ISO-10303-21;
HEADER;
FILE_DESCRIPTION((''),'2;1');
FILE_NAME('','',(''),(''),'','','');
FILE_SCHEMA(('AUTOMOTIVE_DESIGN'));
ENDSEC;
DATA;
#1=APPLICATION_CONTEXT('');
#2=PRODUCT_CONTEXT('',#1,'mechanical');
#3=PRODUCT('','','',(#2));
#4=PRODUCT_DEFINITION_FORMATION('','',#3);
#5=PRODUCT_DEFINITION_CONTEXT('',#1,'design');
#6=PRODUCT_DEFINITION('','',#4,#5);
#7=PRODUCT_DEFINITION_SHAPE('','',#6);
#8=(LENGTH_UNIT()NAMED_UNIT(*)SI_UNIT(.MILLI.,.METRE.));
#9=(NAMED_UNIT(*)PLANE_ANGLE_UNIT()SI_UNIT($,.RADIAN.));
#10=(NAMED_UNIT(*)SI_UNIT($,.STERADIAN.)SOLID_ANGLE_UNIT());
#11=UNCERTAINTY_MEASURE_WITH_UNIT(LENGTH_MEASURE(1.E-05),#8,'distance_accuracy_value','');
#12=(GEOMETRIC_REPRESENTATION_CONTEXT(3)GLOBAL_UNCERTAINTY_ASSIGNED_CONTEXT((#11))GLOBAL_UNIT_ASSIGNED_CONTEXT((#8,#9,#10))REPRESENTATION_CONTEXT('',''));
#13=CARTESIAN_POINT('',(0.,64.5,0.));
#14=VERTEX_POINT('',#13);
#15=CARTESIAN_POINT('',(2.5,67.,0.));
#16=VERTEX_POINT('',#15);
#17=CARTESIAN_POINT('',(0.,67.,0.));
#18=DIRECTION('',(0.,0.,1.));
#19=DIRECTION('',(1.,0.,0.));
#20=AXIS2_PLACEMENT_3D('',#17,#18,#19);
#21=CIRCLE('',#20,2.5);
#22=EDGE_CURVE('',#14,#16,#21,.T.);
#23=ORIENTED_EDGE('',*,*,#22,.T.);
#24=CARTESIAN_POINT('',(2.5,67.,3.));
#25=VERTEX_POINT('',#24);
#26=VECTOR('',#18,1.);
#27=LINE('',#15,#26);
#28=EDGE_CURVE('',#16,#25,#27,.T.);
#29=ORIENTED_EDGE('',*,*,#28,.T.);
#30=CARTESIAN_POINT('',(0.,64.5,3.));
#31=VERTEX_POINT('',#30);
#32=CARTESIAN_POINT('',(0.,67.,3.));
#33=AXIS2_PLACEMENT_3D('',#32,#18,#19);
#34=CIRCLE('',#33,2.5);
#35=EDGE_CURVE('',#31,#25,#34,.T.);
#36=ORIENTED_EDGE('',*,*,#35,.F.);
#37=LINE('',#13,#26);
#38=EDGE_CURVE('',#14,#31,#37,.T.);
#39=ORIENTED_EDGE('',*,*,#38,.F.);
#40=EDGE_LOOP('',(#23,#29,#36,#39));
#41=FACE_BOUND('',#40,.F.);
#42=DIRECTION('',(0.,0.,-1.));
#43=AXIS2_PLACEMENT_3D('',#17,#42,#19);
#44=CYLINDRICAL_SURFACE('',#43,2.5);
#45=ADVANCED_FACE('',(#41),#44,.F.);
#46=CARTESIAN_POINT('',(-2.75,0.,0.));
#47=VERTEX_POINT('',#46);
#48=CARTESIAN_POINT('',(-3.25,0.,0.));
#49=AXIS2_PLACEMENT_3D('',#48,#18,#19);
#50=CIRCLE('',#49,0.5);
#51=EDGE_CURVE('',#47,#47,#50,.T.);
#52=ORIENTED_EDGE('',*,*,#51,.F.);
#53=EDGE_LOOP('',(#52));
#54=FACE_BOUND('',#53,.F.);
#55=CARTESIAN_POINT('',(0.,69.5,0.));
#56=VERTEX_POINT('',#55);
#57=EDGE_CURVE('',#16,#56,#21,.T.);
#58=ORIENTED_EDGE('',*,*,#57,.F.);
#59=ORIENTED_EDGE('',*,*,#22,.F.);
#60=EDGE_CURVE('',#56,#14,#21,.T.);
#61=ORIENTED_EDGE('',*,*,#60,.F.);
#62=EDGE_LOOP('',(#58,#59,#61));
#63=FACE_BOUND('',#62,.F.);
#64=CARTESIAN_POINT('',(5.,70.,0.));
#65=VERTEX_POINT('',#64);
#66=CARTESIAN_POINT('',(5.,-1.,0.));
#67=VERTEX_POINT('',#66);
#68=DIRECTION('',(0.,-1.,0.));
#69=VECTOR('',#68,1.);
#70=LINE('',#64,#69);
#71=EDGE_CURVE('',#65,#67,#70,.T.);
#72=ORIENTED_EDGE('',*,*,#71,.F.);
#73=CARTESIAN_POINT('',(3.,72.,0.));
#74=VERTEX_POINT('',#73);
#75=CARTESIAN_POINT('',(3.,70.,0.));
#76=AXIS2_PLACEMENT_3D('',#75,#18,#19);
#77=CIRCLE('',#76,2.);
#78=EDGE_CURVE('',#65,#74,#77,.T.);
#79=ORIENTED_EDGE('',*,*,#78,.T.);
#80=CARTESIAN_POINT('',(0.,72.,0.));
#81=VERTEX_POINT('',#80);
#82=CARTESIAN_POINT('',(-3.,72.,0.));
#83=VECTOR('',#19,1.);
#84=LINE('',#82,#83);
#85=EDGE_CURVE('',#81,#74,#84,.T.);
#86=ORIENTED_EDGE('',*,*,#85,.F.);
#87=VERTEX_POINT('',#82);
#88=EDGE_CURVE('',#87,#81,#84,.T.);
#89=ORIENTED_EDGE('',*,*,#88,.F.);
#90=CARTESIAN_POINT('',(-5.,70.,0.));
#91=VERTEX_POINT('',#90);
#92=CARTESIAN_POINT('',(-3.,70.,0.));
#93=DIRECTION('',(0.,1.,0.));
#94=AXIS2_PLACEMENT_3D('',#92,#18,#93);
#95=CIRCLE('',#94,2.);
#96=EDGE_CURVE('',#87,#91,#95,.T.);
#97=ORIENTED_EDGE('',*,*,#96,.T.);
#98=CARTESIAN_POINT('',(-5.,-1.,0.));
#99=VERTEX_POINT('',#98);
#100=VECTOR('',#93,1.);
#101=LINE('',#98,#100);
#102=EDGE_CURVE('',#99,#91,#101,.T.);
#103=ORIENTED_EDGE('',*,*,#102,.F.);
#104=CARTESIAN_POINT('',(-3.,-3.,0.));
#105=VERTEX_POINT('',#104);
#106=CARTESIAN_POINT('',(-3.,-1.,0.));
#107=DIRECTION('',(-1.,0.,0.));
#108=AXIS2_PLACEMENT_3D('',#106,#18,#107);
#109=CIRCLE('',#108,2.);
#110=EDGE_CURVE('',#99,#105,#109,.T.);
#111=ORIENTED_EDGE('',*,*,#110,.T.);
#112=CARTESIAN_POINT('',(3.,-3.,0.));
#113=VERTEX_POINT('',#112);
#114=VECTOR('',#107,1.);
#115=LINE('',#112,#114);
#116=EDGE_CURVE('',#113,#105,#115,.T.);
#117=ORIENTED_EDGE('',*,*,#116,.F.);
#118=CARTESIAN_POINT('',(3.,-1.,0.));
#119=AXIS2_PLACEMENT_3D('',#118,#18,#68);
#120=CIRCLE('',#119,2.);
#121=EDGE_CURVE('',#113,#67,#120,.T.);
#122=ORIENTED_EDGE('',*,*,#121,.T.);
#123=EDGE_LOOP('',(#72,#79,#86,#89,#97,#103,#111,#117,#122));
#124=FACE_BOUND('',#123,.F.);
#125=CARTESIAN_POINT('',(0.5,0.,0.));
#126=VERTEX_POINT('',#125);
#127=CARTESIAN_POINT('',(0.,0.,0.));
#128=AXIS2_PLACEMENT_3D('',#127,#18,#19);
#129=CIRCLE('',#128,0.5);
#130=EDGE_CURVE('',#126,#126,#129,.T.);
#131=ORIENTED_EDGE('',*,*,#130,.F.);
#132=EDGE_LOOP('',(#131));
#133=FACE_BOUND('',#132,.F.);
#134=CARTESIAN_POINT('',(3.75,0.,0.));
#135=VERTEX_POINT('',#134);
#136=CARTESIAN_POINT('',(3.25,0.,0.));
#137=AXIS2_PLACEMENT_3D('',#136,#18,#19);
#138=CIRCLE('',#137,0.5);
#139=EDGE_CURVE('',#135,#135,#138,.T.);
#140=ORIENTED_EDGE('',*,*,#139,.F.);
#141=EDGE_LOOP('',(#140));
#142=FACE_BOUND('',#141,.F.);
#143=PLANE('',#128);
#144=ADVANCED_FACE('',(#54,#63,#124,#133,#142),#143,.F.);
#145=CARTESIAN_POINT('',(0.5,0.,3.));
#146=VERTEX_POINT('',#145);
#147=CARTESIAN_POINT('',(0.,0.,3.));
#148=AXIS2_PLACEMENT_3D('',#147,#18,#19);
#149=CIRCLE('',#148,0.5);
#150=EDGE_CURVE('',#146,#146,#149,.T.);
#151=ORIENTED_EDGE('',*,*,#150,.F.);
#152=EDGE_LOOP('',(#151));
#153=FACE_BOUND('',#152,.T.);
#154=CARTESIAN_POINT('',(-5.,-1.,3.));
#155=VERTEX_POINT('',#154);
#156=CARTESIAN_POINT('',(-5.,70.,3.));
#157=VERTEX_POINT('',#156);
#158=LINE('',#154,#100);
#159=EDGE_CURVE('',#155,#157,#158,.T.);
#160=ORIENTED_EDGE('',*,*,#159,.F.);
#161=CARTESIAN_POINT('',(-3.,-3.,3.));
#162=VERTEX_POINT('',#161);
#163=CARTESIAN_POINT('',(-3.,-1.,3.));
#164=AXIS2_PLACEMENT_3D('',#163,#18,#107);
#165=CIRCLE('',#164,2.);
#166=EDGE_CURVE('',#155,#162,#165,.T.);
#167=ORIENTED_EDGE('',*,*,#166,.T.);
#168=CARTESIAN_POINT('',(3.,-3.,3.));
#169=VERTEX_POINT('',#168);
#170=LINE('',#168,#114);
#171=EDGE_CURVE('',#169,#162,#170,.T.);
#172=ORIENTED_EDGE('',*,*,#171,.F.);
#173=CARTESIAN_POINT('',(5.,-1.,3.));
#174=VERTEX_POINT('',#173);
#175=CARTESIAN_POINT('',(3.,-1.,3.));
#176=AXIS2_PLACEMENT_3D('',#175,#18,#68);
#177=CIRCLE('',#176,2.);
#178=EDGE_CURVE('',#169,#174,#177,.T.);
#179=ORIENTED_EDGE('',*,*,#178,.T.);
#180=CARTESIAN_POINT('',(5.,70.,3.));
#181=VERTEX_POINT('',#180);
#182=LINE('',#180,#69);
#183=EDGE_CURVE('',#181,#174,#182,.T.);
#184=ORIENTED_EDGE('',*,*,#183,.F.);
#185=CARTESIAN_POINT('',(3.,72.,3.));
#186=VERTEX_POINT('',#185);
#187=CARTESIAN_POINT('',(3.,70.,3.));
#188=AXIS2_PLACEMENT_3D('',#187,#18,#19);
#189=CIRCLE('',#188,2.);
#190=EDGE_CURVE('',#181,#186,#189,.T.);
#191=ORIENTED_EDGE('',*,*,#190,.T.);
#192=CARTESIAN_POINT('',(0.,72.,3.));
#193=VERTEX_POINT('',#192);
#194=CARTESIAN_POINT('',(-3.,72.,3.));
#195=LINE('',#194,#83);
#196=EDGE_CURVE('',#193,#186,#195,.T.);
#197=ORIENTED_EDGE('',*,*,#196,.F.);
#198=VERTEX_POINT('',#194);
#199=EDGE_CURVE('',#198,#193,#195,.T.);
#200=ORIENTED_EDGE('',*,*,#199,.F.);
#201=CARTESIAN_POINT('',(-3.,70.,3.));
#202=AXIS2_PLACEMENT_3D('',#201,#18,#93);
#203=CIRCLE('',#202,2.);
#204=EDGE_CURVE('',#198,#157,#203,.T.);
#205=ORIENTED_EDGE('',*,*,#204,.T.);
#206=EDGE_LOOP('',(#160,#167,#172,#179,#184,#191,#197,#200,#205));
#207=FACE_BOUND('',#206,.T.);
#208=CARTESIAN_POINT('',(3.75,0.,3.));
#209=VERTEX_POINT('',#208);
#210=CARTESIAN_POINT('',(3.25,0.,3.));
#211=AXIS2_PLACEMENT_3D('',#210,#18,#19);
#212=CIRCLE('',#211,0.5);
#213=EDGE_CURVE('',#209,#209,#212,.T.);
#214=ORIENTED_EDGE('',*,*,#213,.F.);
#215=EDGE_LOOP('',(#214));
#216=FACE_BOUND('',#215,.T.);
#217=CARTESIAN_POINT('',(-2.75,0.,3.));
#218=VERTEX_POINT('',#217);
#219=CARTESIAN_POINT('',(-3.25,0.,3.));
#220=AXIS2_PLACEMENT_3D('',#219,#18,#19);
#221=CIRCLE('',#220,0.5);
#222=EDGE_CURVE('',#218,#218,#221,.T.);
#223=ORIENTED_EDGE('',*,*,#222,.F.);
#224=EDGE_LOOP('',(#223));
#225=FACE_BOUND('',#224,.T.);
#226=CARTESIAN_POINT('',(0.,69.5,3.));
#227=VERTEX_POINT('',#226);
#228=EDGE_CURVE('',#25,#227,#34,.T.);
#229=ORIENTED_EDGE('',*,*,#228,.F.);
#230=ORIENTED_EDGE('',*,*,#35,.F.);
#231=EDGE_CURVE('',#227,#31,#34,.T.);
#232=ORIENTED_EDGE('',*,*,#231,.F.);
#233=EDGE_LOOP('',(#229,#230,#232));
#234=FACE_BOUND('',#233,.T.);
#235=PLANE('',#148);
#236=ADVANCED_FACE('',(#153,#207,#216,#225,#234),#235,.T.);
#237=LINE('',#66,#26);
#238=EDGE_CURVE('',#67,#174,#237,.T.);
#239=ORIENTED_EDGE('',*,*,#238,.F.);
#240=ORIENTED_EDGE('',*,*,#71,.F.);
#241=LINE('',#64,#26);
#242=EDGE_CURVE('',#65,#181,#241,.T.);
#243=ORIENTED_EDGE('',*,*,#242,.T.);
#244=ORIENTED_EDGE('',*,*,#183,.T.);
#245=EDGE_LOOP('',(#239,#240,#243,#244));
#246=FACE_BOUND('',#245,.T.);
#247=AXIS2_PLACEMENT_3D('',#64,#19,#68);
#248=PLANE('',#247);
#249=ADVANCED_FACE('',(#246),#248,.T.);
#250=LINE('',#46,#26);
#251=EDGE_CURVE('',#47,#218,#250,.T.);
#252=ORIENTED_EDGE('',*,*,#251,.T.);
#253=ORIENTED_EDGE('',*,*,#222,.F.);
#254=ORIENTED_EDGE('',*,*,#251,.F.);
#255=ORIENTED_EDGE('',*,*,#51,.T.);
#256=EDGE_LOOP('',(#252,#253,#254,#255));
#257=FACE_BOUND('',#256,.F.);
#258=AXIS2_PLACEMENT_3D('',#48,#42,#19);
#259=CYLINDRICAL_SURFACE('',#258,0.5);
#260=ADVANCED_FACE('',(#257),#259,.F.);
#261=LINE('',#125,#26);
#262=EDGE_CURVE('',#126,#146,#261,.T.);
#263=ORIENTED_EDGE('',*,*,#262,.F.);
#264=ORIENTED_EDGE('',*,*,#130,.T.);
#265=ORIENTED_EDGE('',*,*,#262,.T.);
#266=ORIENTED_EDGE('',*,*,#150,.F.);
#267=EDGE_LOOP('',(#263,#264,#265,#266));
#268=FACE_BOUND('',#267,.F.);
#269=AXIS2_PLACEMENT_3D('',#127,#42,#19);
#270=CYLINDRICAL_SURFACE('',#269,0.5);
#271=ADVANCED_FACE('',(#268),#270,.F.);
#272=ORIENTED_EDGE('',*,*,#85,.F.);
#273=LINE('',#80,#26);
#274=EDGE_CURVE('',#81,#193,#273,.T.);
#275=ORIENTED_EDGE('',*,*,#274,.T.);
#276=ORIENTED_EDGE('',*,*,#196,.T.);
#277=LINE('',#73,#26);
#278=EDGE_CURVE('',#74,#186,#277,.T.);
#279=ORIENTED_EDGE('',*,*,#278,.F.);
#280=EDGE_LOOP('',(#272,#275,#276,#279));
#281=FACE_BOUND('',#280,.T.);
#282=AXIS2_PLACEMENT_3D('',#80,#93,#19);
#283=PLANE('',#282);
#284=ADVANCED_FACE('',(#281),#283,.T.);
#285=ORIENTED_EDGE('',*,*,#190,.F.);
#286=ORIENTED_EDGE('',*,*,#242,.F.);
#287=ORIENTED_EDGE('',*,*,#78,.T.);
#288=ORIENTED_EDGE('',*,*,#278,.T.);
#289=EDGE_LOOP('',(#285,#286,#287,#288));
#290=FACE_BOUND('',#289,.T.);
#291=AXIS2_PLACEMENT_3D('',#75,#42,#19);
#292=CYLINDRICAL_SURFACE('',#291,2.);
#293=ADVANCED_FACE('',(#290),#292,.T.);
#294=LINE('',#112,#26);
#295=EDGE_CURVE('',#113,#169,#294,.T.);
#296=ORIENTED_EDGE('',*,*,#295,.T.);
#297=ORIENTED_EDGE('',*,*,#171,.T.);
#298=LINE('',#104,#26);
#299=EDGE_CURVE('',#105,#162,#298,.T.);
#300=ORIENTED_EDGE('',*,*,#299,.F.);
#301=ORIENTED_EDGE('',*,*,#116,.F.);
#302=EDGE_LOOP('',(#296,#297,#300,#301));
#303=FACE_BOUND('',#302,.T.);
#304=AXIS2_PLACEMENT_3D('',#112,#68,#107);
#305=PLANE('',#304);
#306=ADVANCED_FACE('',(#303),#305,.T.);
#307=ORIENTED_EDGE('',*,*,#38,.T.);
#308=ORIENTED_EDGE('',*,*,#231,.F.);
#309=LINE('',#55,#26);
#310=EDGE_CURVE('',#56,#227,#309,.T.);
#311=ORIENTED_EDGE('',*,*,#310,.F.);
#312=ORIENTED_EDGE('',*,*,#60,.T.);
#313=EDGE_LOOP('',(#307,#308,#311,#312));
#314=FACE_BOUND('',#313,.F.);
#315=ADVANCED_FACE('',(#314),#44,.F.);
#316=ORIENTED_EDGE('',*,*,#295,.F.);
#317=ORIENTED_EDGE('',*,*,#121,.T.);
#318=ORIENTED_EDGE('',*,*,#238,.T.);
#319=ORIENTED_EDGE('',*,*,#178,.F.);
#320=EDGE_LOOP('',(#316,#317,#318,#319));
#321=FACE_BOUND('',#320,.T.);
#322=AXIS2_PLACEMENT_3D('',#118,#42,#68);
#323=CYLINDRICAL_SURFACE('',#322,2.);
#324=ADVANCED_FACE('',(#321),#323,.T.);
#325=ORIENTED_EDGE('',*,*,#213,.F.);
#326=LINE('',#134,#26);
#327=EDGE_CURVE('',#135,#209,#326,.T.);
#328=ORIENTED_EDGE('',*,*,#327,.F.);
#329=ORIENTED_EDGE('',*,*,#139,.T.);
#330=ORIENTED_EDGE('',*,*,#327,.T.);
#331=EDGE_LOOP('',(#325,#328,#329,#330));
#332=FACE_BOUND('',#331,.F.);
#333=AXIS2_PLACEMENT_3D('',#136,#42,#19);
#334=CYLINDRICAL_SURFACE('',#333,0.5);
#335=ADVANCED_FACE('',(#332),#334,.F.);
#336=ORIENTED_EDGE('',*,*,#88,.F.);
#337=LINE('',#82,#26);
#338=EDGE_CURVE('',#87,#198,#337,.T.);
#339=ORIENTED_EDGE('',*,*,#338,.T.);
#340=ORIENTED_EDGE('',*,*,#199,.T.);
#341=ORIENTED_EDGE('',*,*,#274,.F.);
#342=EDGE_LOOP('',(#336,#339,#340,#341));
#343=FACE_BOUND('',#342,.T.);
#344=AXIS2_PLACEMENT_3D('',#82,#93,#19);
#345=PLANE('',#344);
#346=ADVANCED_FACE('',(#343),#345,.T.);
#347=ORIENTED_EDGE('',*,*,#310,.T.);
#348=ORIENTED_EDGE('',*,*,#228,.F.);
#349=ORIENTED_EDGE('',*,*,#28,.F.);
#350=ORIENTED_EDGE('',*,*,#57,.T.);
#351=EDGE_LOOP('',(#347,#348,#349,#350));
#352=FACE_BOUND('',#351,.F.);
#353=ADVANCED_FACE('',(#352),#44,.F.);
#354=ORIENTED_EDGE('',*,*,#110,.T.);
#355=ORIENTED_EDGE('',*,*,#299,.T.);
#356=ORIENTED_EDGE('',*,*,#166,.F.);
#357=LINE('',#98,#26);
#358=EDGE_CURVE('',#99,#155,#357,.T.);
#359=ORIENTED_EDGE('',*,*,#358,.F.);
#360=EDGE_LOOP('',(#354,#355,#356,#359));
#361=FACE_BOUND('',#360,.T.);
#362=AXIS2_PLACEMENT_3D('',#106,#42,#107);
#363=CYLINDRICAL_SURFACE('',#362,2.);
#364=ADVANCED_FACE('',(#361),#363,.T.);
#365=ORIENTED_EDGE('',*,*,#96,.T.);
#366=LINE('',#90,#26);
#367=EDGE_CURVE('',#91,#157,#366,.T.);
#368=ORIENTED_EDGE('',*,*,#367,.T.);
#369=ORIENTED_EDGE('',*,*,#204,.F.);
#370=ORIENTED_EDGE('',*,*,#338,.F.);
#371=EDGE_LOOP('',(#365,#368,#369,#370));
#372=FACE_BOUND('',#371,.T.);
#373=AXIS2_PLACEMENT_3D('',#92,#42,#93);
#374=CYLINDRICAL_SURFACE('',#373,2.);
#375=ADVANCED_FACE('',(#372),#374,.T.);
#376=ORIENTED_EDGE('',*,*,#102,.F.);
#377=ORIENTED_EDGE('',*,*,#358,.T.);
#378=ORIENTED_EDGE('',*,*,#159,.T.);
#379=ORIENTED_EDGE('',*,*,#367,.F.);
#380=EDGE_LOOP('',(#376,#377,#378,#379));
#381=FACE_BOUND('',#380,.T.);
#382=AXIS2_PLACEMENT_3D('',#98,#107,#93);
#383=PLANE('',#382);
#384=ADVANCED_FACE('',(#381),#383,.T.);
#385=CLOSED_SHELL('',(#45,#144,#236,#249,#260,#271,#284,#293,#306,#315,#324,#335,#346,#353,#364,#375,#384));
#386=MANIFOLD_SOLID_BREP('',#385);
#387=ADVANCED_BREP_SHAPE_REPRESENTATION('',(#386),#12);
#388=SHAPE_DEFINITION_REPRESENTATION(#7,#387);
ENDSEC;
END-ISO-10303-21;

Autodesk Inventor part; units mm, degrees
ref_plane "YZ Plane" through (0, 0, 0) normal (1, 0, 0) x (0, 1, 0)
ref_plane "XZ Plane" through (0, 0, 0) normal (0, 1, 0) x (-1, 0, 0)
ref_plane "XY Plane" through (0, 0, 0) normal (0, 0, 1) x (1, 0, 0)
sketch "Sketch1" plane through (0, 0, 0) normal (0, 0, 1) x (1, 0, 0)
  circle A0 centre (0, 0) radius 0.5
  line L0 (-3, 72) -> (3, 72)
  line L1 (5, 70) -> (5, -1)
  line L2 (3, -3) -> (-3, -3)
  line L3 (-5, -1) -> (-5, 70)
  arc A1 (-3, 72) -> (-5, 70) centre (-3, 70) ccw
  arc A2 (5, 70) -> (3, 72) centre (3, 70) ccw
  arc A3 (-5, -1) -> (-3, -3) centre (-3, -1) ccw
  arc A4 (3, -3) -> (5, -1) centre (3, -1) ccw
  circle A5 centre (0, 67) radius 2.5
  line L4 (0, 72) -> (0, 61.8445)
  circle A6 centre (-3.25, 0) radius 0.5
  circle A7 centre (3.25, 0) radius 0.5
  point P0 (-5, 72)
  point P1 (-5, -3)
  point P2 (0, -3)
  dimension "d3" = 1
  dimension "d7" = 75
  dimension "d8" = 10
  dimension "d9" = 3
  dimension "d10" = 2
  dimension "d11" = 5
  dimension "d12" = 5
  dimension "d15" = 1
  dimension "d16" = 1
  dimension "d17" = 3.25
  dimension "d18" = 3.25
extrude "Extrusion1" add sketch "Sketch1" along normal blind 3
properties part number "FP V2 Servo Arm"
